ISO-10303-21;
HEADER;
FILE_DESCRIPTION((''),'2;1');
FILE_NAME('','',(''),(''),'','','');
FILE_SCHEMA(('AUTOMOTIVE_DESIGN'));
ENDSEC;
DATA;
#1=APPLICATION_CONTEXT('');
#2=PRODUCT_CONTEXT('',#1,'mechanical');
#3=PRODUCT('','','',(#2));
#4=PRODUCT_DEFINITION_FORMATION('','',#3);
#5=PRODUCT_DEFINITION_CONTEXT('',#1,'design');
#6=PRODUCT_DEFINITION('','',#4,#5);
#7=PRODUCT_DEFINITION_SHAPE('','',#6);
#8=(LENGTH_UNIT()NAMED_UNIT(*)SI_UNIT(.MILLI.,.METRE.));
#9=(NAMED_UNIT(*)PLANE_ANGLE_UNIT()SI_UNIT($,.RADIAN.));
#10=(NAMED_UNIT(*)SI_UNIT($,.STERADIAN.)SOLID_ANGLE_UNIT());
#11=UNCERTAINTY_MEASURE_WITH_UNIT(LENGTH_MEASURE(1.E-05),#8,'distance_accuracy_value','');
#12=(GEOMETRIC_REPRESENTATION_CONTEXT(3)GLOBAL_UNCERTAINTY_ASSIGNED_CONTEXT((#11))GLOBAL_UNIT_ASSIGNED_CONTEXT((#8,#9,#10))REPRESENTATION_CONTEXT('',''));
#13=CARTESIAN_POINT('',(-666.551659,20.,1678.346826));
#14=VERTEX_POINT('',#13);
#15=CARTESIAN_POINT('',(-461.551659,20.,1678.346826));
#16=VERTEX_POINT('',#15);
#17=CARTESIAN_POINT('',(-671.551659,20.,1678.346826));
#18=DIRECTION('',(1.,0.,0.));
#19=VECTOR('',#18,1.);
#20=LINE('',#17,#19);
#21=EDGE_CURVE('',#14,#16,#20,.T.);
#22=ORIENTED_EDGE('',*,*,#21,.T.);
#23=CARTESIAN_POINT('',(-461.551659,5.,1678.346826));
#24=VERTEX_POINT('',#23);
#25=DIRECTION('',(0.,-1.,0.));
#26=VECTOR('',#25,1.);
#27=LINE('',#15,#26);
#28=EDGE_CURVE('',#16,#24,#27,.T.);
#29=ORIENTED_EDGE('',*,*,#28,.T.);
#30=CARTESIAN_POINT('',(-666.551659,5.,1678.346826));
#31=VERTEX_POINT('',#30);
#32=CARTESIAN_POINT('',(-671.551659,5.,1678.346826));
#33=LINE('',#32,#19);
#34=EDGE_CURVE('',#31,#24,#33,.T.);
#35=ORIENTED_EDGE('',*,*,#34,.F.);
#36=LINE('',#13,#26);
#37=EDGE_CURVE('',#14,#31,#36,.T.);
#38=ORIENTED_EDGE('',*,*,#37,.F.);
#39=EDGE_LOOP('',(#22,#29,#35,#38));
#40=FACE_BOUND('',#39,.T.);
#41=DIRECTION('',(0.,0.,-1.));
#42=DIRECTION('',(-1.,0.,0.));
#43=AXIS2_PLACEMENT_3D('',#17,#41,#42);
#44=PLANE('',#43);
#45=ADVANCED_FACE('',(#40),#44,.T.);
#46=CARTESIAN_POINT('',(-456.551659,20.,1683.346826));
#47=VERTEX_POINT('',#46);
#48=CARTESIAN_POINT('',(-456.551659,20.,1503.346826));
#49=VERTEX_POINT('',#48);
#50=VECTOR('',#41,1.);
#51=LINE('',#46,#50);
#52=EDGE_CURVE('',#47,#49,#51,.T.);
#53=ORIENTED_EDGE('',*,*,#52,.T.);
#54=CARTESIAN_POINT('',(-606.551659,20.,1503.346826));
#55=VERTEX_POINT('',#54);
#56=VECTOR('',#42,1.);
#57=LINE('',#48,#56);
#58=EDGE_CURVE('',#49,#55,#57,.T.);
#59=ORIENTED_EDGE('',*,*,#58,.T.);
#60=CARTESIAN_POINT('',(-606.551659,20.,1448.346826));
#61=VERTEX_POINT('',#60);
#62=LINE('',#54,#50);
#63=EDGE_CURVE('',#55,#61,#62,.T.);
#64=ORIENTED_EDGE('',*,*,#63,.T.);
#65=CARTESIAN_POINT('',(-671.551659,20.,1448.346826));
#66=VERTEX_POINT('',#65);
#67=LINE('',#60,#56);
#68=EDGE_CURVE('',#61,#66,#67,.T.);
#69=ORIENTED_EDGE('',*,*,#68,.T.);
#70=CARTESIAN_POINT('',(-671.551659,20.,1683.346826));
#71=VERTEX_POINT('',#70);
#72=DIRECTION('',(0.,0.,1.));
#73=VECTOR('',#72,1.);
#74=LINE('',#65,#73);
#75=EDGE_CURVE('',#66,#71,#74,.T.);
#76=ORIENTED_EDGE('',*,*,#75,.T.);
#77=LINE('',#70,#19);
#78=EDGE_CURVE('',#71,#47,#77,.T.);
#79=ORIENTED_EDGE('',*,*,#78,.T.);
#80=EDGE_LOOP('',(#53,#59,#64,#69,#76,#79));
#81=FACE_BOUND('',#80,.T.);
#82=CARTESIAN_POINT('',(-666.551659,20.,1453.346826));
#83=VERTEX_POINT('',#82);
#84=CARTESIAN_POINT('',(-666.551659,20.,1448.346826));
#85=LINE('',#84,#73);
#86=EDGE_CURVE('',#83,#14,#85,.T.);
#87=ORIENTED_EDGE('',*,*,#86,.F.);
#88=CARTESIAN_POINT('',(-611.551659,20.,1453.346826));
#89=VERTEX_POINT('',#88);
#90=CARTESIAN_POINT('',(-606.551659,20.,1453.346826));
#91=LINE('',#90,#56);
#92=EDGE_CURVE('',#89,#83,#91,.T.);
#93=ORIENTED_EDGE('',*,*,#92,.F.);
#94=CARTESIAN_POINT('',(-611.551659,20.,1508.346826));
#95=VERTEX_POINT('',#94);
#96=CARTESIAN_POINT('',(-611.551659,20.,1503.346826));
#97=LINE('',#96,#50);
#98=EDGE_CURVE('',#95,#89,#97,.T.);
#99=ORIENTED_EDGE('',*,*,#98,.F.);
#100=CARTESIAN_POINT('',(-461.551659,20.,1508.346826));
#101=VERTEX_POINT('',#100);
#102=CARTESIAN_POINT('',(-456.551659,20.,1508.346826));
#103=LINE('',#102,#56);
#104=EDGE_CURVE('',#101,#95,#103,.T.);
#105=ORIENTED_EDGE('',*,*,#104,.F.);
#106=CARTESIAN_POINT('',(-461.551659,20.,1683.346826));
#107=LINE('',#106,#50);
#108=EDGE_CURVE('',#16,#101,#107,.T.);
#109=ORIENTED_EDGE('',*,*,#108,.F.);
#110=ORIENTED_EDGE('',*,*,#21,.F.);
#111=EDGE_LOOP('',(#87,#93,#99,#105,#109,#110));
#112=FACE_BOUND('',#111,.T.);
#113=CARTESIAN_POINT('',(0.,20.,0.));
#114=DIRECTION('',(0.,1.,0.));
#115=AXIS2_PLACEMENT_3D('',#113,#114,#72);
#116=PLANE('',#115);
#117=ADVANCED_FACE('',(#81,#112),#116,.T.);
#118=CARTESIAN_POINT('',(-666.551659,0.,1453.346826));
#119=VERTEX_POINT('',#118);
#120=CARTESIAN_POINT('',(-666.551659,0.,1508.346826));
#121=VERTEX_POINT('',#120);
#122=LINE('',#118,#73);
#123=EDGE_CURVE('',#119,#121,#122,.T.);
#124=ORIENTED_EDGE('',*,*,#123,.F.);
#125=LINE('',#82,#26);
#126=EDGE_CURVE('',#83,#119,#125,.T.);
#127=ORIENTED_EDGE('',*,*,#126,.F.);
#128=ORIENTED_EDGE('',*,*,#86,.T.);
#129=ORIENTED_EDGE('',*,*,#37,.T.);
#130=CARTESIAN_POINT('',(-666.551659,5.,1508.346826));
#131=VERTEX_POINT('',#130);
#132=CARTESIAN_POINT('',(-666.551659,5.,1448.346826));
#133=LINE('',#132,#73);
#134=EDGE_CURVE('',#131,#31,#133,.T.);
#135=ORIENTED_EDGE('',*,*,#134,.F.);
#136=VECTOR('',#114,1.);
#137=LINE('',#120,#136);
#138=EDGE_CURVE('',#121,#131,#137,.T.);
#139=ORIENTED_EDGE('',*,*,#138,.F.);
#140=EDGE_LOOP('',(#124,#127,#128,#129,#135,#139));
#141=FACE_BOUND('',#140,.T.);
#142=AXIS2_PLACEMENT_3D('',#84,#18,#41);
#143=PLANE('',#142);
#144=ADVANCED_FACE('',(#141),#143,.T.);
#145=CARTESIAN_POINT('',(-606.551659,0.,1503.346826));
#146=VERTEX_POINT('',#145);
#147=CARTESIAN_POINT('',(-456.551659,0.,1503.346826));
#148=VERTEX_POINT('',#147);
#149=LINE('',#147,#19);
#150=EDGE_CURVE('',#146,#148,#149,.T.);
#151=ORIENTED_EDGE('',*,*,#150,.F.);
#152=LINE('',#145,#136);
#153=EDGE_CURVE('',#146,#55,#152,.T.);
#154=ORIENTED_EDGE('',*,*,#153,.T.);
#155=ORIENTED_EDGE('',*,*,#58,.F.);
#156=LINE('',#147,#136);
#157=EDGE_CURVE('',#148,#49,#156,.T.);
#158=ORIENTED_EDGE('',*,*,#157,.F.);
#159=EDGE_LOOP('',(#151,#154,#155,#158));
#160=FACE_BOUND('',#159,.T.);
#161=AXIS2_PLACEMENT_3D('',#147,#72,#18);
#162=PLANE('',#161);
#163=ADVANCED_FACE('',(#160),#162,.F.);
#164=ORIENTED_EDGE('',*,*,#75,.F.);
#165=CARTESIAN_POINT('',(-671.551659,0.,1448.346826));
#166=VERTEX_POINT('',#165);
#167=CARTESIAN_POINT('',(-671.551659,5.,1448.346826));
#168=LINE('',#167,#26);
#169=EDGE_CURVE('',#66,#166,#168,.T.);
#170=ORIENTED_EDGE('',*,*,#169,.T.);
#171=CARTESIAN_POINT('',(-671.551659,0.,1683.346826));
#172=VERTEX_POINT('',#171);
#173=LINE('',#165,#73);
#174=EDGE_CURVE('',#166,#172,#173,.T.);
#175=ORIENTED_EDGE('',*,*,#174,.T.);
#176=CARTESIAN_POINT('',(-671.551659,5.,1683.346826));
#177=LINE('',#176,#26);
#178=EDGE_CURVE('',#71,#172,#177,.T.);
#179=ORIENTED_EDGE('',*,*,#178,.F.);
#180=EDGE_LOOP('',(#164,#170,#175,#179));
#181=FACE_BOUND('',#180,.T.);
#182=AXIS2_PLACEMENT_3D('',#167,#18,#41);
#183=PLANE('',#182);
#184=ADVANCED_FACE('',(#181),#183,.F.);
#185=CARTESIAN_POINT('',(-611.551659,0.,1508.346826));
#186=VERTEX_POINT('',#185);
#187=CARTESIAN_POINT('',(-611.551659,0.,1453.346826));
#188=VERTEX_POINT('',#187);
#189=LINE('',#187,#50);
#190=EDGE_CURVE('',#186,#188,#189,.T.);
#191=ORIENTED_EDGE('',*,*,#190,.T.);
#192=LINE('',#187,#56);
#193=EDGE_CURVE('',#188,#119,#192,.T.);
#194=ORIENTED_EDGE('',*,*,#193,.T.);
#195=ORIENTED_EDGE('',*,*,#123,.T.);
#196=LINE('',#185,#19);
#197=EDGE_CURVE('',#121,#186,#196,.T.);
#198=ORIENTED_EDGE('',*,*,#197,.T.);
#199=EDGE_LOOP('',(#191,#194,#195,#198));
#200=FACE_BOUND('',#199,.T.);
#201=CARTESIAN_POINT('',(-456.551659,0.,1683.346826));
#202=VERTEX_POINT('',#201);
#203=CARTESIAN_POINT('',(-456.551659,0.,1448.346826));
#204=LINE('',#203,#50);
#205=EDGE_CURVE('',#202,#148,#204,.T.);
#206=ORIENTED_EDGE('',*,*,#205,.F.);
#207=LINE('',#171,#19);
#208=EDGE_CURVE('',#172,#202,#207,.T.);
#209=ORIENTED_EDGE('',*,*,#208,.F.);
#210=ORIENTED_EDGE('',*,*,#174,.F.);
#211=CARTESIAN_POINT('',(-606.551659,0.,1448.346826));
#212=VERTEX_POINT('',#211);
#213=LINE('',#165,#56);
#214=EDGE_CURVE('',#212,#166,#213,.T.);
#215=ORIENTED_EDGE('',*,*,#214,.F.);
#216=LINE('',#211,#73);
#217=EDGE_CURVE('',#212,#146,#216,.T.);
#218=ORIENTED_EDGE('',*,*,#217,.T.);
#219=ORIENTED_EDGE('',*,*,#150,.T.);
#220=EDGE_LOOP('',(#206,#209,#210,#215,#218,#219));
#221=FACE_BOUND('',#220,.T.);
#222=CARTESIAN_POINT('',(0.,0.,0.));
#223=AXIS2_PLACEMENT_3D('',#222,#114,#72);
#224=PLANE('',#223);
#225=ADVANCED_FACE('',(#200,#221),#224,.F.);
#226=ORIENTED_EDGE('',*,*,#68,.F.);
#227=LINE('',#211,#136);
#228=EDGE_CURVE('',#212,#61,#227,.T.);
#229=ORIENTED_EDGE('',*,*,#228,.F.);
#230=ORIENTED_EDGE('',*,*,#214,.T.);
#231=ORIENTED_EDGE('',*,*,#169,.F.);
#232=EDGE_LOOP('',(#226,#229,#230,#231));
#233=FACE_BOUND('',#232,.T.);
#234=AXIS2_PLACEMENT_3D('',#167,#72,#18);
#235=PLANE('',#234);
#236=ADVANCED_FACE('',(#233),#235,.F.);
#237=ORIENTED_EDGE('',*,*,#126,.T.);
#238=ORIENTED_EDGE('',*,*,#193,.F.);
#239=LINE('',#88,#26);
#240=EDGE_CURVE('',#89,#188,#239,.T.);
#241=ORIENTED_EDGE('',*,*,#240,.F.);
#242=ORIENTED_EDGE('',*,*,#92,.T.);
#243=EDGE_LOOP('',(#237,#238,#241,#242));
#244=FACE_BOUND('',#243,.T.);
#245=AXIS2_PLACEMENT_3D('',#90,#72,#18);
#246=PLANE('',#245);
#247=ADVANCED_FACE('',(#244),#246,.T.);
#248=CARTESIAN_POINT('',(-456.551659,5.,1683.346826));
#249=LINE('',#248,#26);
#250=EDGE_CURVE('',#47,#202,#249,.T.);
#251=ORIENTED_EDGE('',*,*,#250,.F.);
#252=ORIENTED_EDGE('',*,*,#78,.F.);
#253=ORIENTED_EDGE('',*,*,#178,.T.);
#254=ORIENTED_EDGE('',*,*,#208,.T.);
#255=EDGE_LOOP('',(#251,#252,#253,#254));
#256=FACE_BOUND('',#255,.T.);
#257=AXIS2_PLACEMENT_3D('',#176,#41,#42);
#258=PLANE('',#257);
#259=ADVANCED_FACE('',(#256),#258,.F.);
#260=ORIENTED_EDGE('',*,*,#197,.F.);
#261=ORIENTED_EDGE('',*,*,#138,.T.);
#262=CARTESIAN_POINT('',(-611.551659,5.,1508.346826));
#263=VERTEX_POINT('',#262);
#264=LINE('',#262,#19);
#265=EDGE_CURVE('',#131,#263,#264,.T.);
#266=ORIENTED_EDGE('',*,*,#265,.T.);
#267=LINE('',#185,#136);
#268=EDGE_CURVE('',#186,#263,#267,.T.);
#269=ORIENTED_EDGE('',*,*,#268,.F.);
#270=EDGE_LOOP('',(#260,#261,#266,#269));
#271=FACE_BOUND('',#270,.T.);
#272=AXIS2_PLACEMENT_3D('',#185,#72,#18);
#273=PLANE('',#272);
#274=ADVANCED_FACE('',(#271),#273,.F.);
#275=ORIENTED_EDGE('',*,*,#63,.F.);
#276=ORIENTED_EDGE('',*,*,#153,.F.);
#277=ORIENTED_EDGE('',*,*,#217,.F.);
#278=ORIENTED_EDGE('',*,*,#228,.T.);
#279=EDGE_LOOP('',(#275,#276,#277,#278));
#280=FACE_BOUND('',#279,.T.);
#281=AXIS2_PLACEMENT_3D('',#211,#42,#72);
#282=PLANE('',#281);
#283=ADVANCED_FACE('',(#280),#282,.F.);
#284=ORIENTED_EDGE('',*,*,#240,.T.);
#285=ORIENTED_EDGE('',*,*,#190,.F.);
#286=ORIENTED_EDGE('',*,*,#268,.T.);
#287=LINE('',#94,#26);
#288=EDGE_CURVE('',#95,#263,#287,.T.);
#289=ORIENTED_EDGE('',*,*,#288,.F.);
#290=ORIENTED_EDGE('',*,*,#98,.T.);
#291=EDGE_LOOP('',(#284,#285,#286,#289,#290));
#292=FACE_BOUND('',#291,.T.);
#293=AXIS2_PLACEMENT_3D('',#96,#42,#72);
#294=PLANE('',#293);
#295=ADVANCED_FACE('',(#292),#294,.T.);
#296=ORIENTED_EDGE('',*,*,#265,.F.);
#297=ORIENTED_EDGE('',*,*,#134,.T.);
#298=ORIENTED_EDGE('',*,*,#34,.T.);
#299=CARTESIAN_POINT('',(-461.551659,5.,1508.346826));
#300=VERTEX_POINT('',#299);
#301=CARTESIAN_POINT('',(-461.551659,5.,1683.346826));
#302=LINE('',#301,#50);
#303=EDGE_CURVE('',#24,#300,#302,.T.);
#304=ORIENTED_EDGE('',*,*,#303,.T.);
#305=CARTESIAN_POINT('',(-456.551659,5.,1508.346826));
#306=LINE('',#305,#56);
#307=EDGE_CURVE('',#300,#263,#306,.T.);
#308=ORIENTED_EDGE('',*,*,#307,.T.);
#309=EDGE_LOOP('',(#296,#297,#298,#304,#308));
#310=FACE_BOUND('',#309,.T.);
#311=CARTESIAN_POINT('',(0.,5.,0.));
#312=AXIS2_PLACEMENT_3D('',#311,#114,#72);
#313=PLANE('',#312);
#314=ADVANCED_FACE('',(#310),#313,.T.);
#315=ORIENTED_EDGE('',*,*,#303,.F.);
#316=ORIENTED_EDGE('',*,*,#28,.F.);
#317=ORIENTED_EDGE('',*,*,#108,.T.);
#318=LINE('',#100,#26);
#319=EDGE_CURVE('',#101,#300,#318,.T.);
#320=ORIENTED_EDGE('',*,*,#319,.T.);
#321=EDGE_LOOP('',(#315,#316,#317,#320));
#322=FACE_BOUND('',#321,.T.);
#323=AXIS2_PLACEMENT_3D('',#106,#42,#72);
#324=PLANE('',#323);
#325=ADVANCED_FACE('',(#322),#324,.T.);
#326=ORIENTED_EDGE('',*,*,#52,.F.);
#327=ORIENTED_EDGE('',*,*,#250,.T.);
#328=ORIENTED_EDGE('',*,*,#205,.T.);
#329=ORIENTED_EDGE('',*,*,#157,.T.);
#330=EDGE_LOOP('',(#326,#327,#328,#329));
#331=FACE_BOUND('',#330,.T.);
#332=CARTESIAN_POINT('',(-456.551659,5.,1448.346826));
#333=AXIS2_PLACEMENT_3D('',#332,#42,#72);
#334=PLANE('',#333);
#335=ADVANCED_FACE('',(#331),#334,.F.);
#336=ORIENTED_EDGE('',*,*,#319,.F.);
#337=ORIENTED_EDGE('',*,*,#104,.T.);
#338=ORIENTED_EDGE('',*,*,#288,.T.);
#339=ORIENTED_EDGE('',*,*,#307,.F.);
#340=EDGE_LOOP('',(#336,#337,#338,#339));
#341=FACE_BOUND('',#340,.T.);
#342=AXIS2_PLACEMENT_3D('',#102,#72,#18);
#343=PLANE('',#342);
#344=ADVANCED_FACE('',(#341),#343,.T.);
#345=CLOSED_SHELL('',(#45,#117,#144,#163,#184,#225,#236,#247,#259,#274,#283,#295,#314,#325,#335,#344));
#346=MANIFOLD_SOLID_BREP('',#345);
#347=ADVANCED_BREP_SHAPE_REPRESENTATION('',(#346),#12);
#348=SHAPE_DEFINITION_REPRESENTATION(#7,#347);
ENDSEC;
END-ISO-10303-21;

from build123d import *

# Parameters (mm, degrees)
EXTRUDE_1_OUTLINE_W = 215
EXTRUDE_1_OUTLINE_H = 235
EXTRUDE_1_DEPTH     = 5
SKETCH_3_W          = 150
SKETCH_3_H          = 55
CUT_EXTRUDE_1_DEPTH = 1813.363972104
EXTRUDE_1_2_DEPTH   = 15
SKETCH_5_W          = 55
SKETCH_5_H          = 55
CUT_EXTRUDE_2_DEPTH = 1813.419147819


# Read off the part's stored shape, not the designer's step: 凸台-拉伸1
with BuildPart() as part:
    # Extrude 1 outline → Extrude 1 (new body)
    with BuildSketch(Plane(origin=(0, 0, 0), x_dir=(1, 0, 0), z_dir=(0, 1, 0))):
        with Locations((-564.05165919, -1565.846825945)):
            Rectangle(EXTRUDE_1_OUTLINE_W, EXTRUDE_1_OUTLINE_H)
    extrude(amount=EXTRUDE_1_DEPTH)

    # 草图3 → 切除-拉伸1 (cut, through all)
    with BuildSketch(Plane(origin=(0, 5, 0), x_dir=(1, 0, 0), z_dir=(0, 1, 0))):
        with Locations((-531.55165919, -1475.846825945)):
            Rectangle(SKETCH_3_W, SKETCH_3_H)
    extrude(amount=-CUT_EXTRUDE_1_DEPTH, mode=Mode.SUBTRACT)

    # 草图4 → Extrude 1 2 (add)
    with BuildSketch(Plane(origin=(0, 5, 0), x_dir=(1, 0, 0), z_dir=(0, 1, 0))):
        Polygon((-456.55165919, -1503.346825945), (-606.55165919, -1503.346825945), (-606.55165919, -1448.346825945), (-671.55165919, -1448.346825945), (-671.55165919, -1683.346825945), (-456.55165919, -1683.346825945), align=None)
        Polygon((-461.55165919, -1508.346825945), (-611.55165919, -1508.346825945), (-611.55165919, -1453.346825945), (-666.55165919, -1453.346825945), (-666.55165919, -1678.346825945), (-461.55165919, -1678.346825945), align=None, mode=Mode.SUBTRACT)
    extrude(amount=EXTRUDE_1_2_DEPTH)

    # 草图5 → 切除-拉伸2 (cut, through all)
    with BuildSketch(Plane(origin=(0, 5, 0), x_dir=(1, 0, 0), z_dir=(0, 1, 0))):
        with Locations((-639.05165919, -1480.846825945)):
            Rectangle(SKETCH_5_W, SKETCH_5_H)
    extrude(amount=-CUT_EXTRUDE_2_DEPTH, mode=Mode.SUBTRACT)


solid = part.part
